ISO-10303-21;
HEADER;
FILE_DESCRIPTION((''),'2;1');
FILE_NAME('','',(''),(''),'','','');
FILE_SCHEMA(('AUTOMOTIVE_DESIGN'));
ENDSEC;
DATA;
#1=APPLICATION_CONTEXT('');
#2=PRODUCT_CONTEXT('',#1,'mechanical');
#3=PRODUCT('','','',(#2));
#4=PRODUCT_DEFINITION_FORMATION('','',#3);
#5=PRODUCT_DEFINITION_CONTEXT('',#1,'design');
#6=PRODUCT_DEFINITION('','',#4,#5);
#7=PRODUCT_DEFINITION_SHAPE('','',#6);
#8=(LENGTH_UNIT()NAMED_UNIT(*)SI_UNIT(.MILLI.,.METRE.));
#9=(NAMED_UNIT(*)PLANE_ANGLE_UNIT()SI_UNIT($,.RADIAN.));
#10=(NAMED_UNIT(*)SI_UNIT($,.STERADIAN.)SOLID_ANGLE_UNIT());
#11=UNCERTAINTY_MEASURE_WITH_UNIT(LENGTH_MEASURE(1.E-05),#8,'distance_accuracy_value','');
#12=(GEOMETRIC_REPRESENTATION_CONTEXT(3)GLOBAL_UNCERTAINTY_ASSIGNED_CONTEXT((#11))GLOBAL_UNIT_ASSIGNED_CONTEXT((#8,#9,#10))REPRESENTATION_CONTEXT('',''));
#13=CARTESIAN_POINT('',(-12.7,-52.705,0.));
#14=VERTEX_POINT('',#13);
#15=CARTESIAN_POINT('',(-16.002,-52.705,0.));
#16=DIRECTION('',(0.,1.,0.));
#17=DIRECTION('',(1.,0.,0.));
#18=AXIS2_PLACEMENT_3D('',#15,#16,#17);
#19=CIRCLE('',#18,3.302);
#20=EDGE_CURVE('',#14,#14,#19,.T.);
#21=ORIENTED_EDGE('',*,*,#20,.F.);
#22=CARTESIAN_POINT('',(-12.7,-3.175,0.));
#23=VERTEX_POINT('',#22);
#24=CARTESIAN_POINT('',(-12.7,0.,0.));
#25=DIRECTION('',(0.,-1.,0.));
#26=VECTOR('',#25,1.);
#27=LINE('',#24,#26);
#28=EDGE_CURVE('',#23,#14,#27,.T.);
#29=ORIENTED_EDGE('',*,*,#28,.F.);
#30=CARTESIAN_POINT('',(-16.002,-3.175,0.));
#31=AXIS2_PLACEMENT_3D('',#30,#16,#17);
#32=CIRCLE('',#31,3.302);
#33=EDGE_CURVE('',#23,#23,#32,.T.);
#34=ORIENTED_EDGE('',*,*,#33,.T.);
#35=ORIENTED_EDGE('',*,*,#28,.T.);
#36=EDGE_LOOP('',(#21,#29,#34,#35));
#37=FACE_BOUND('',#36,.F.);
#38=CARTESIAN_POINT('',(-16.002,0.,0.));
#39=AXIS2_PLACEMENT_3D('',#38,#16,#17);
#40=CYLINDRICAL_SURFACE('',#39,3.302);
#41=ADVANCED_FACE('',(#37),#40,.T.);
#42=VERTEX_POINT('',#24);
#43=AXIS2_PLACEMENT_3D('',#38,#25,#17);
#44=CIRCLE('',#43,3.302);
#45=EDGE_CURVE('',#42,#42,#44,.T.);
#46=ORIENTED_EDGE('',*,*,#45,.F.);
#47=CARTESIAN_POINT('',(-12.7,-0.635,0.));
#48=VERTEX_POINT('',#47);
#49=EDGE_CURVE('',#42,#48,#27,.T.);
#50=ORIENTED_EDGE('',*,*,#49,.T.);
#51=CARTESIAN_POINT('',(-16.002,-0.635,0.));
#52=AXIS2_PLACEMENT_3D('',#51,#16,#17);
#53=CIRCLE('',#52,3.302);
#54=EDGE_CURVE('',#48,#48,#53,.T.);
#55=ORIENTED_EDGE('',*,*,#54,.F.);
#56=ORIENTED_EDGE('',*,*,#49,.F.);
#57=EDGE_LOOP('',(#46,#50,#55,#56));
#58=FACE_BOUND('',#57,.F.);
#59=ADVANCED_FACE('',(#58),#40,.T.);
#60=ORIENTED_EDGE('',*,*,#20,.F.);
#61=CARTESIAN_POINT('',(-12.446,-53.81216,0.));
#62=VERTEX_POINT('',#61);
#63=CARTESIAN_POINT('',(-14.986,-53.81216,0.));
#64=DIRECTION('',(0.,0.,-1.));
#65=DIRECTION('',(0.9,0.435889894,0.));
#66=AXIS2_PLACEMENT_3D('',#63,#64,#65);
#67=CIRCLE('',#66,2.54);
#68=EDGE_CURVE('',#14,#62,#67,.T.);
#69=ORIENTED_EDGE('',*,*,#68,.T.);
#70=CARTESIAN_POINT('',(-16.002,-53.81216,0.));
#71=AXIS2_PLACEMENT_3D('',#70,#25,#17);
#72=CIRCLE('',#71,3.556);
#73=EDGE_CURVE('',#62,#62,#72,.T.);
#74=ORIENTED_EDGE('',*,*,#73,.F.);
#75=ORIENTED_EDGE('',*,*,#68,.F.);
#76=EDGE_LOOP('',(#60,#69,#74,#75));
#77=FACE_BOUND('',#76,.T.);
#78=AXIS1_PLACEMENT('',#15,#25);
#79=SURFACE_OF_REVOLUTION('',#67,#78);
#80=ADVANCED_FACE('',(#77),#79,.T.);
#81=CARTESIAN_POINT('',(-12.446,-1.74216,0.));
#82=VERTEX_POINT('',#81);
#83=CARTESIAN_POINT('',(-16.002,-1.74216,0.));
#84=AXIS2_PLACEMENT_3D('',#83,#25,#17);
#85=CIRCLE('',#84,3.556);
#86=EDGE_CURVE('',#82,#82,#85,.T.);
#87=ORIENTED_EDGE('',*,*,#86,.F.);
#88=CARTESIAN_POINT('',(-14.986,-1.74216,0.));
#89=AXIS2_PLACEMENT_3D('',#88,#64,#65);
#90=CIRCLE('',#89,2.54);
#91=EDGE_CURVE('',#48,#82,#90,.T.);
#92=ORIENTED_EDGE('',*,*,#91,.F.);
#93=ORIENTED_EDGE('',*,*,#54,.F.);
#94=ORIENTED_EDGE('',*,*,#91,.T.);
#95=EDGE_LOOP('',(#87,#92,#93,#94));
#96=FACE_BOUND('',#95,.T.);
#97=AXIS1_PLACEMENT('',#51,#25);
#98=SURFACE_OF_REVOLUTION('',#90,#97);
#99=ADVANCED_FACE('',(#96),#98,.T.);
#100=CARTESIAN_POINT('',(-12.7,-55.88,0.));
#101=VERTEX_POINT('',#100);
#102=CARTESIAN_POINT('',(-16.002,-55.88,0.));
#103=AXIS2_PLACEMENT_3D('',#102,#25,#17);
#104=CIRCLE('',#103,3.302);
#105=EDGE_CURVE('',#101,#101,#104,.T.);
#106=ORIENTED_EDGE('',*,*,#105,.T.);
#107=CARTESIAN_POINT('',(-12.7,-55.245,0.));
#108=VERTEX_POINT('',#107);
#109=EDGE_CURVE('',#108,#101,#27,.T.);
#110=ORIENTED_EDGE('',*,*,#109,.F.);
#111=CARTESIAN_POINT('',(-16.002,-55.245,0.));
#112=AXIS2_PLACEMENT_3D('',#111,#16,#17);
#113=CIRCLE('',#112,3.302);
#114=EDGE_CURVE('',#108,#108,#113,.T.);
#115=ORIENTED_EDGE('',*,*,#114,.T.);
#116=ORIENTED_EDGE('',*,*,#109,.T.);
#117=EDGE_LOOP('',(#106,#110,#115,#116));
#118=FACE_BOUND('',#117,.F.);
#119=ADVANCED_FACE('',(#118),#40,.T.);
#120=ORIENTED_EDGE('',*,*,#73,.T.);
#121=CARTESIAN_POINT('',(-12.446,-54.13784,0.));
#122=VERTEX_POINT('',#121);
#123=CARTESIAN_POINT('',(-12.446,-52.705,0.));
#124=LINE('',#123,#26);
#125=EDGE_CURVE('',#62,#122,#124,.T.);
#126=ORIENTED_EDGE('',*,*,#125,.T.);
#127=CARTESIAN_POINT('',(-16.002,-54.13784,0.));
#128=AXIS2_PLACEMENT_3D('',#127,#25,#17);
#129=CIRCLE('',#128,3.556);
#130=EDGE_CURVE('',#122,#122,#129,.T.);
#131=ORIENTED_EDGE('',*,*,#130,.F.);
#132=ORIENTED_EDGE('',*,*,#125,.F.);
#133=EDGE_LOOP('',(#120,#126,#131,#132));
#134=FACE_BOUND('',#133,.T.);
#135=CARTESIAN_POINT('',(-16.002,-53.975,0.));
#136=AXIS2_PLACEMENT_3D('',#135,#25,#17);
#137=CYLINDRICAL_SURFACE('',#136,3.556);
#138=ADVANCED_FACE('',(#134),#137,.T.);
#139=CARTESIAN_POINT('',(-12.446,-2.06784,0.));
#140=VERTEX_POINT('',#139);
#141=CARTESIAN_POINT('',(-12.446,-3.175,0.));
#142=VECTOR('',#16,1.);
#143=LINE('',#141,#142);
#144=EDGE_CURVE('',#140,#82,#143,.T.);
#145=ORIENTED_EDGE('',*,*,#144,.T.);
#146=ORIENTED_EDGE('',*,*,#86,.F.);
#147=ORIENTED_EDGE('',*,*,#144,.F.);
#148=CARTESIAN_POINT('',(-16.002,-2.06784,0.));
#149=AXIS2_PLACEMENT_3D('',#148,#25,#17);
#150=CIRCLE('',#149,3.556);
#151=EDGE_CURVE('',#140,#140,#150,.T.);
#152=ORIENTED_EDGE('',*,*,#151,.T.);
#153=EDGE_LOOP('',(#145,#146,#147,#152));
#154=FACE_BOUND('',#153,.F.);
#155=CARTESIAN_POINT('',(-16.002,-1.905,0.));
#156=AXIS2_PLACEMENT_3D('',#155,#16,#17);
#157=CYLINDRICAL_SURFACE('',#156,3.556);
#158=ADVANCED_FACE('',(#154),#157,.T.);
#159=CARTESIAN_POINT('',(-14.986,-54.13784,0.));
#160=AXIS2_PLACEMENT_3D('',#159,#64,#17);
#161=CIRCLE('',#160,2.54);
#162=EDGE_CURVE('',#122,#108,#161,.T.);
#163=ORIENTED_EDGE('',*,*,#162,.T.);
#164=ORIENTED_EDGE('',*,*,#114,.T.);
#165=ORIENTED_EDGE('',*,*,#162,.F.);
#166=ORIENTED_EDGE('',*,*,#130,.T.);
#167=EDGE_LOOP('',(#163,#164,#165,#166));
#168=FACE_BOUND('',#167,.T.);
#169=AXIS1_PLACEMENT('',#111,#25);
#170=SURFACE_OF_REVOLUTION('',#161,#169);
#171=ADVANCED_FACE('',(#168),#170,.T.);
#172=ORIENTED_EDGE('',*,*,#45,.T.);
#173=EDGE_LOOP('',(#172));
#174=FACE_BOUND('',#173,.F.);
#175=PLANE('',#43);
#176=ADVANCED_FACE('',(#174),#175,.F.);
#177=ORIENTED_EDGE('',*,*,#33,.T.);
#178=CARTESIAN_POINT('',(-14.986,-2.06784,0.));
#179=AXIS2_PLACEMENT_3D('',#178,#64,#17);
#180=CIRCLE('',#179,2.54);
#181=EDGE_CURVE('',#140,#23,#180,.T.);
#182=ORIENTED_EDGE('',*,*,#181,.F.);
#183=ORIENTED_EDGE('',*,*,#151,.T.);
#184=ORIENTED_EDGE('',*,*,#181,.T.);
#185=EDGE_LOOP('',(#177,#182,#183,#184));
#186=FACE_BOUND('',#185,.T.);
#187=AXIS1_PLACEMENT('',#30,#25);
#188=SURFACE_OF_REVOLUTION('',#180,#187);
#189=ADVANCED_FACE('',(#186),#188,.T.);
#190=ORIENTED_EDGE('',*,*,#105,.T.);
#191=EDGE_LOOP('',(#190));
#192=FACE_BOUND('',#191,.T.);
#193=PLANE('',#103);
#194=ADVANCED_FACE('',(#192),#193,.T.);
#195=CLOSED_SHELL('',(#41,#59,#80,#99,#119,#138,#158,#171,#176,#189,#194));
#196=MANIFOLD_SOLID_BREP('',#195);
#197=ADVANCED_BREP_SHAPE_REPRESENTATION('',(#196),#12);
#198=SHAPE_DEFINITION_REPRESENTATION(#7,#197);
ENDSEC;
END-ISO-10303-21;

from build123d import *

# Parameters (mm, degrees)
F0_R     = 3.302
F1_DEPTH = 55.88
F3_R     = 3.556
F4_DEPTH = 1.27


# Not quite as in the source:
# - a fillet or chamfer that OpenCascade refuses, or shapes differently, is made with other operations: its cross-section is extruded or revolved along the edge and cut away or added
# - a feature names something its author has since deleted; it is built from what else it names


with BuildPart() as f1:
    # F0 (on Front) → F1 (new body)
    with BuildSketch(Plane.XZ):
        with Locations((-16.002, 0)):
            Circle(F0_R)
    extrude(amount=F1_DEPTH)

    # F3 (on offset) → F4 (join, symmetric)
    with BuildSketch(Plane.XZ.offset(53.975)):
        with Locations((-16.002, 0)):
            Circle(F3_R)
    extrude(amount=F4_DEPTH, both=True)

    # F6: F1 across plane


with BuildPart() as f1_1:
    add(f1.part)
    add(f1.part.mirror(Plane(origin=(-16.002, -27.94, 0), x_dir=(1, 0, 0), z_dir=(0, -1, 0))))

    # F7: fillet of radius 2.54 on 4 edges, made by hand

    # F7_s1 → F7_t2 (revolve, cut)
    with BuildSketch(Plane.XY):
        with BuildLine():
            ThreePointArc((-12.446, -54.1378396683), (-12.5103142364, -54.7058009346), (-12.7, -55.245))
            Line((-12.7, -55.245), (-12.446, -55.245))
            Line((-12.446, -55.245), (-12.446, -54.1378396683))
        make_face()
    revolve(axis=Axis((-16.002, -55.245, 0), (0, -1, 0)), mode=Mode.SUBTRACT)

    # F7_s3 → F7_t4 (revolve, cut)
    with BuildSketch(Plane.XY):
        with BuildLine():
            ThreePointArc((-12.7, -52.705), (-12.5103142364, -53.2441990654), (-12.446, -53.8121603317))
            Line((-12.446, -53.8121603317), (-12.446, -52.705))
            Line((-12.446, -52.705), (-12.7, -52.705))
        make_face()
    revolve(axis=Axis((-16.002, -52.705, 0), (0, -1, 0)), mode=Mode.SUBTRACT)

    # F7_s5 → F7_t6 (revolve, cut)
    with BuildSketch(Plane.XY):
        with BuildLine():
            ThreePointArc((-12.446, -2.0678396683), (-12.5103142364, -2.6358009346), (-12.7, -3.175))
            Line((-12.7, -3.175), (-12.446, -3.175))
            Line((-12.446, -3.175), (-12.446, -2.0678396683))
        make_face()
    revolve(axis=Axis((-16.002, -3.175, 0), (0, -1, 0)), mode=Mode.SUBTRACT)

    # F7_s7 → F7_t8 (revolve, cut)
    with BuildSketch(Plane.XY):
        with BuildLine():
            ThreePointArc((-12.7, -0.635), (-12.5103142364, -1.1741990654), (-12.446, -1.7421603317))
            Line((-12.446, -1.7421603317), (-12.446, -0.635))
            Line((-12.446, -0.635), (-12.7, -0.635))
        make_face()
    revolve(axis=Axis((-16.002, -0.635, 0), (0, -1, 0)), mode=Mode.SUBTRACT)


solid = f1_1.part
